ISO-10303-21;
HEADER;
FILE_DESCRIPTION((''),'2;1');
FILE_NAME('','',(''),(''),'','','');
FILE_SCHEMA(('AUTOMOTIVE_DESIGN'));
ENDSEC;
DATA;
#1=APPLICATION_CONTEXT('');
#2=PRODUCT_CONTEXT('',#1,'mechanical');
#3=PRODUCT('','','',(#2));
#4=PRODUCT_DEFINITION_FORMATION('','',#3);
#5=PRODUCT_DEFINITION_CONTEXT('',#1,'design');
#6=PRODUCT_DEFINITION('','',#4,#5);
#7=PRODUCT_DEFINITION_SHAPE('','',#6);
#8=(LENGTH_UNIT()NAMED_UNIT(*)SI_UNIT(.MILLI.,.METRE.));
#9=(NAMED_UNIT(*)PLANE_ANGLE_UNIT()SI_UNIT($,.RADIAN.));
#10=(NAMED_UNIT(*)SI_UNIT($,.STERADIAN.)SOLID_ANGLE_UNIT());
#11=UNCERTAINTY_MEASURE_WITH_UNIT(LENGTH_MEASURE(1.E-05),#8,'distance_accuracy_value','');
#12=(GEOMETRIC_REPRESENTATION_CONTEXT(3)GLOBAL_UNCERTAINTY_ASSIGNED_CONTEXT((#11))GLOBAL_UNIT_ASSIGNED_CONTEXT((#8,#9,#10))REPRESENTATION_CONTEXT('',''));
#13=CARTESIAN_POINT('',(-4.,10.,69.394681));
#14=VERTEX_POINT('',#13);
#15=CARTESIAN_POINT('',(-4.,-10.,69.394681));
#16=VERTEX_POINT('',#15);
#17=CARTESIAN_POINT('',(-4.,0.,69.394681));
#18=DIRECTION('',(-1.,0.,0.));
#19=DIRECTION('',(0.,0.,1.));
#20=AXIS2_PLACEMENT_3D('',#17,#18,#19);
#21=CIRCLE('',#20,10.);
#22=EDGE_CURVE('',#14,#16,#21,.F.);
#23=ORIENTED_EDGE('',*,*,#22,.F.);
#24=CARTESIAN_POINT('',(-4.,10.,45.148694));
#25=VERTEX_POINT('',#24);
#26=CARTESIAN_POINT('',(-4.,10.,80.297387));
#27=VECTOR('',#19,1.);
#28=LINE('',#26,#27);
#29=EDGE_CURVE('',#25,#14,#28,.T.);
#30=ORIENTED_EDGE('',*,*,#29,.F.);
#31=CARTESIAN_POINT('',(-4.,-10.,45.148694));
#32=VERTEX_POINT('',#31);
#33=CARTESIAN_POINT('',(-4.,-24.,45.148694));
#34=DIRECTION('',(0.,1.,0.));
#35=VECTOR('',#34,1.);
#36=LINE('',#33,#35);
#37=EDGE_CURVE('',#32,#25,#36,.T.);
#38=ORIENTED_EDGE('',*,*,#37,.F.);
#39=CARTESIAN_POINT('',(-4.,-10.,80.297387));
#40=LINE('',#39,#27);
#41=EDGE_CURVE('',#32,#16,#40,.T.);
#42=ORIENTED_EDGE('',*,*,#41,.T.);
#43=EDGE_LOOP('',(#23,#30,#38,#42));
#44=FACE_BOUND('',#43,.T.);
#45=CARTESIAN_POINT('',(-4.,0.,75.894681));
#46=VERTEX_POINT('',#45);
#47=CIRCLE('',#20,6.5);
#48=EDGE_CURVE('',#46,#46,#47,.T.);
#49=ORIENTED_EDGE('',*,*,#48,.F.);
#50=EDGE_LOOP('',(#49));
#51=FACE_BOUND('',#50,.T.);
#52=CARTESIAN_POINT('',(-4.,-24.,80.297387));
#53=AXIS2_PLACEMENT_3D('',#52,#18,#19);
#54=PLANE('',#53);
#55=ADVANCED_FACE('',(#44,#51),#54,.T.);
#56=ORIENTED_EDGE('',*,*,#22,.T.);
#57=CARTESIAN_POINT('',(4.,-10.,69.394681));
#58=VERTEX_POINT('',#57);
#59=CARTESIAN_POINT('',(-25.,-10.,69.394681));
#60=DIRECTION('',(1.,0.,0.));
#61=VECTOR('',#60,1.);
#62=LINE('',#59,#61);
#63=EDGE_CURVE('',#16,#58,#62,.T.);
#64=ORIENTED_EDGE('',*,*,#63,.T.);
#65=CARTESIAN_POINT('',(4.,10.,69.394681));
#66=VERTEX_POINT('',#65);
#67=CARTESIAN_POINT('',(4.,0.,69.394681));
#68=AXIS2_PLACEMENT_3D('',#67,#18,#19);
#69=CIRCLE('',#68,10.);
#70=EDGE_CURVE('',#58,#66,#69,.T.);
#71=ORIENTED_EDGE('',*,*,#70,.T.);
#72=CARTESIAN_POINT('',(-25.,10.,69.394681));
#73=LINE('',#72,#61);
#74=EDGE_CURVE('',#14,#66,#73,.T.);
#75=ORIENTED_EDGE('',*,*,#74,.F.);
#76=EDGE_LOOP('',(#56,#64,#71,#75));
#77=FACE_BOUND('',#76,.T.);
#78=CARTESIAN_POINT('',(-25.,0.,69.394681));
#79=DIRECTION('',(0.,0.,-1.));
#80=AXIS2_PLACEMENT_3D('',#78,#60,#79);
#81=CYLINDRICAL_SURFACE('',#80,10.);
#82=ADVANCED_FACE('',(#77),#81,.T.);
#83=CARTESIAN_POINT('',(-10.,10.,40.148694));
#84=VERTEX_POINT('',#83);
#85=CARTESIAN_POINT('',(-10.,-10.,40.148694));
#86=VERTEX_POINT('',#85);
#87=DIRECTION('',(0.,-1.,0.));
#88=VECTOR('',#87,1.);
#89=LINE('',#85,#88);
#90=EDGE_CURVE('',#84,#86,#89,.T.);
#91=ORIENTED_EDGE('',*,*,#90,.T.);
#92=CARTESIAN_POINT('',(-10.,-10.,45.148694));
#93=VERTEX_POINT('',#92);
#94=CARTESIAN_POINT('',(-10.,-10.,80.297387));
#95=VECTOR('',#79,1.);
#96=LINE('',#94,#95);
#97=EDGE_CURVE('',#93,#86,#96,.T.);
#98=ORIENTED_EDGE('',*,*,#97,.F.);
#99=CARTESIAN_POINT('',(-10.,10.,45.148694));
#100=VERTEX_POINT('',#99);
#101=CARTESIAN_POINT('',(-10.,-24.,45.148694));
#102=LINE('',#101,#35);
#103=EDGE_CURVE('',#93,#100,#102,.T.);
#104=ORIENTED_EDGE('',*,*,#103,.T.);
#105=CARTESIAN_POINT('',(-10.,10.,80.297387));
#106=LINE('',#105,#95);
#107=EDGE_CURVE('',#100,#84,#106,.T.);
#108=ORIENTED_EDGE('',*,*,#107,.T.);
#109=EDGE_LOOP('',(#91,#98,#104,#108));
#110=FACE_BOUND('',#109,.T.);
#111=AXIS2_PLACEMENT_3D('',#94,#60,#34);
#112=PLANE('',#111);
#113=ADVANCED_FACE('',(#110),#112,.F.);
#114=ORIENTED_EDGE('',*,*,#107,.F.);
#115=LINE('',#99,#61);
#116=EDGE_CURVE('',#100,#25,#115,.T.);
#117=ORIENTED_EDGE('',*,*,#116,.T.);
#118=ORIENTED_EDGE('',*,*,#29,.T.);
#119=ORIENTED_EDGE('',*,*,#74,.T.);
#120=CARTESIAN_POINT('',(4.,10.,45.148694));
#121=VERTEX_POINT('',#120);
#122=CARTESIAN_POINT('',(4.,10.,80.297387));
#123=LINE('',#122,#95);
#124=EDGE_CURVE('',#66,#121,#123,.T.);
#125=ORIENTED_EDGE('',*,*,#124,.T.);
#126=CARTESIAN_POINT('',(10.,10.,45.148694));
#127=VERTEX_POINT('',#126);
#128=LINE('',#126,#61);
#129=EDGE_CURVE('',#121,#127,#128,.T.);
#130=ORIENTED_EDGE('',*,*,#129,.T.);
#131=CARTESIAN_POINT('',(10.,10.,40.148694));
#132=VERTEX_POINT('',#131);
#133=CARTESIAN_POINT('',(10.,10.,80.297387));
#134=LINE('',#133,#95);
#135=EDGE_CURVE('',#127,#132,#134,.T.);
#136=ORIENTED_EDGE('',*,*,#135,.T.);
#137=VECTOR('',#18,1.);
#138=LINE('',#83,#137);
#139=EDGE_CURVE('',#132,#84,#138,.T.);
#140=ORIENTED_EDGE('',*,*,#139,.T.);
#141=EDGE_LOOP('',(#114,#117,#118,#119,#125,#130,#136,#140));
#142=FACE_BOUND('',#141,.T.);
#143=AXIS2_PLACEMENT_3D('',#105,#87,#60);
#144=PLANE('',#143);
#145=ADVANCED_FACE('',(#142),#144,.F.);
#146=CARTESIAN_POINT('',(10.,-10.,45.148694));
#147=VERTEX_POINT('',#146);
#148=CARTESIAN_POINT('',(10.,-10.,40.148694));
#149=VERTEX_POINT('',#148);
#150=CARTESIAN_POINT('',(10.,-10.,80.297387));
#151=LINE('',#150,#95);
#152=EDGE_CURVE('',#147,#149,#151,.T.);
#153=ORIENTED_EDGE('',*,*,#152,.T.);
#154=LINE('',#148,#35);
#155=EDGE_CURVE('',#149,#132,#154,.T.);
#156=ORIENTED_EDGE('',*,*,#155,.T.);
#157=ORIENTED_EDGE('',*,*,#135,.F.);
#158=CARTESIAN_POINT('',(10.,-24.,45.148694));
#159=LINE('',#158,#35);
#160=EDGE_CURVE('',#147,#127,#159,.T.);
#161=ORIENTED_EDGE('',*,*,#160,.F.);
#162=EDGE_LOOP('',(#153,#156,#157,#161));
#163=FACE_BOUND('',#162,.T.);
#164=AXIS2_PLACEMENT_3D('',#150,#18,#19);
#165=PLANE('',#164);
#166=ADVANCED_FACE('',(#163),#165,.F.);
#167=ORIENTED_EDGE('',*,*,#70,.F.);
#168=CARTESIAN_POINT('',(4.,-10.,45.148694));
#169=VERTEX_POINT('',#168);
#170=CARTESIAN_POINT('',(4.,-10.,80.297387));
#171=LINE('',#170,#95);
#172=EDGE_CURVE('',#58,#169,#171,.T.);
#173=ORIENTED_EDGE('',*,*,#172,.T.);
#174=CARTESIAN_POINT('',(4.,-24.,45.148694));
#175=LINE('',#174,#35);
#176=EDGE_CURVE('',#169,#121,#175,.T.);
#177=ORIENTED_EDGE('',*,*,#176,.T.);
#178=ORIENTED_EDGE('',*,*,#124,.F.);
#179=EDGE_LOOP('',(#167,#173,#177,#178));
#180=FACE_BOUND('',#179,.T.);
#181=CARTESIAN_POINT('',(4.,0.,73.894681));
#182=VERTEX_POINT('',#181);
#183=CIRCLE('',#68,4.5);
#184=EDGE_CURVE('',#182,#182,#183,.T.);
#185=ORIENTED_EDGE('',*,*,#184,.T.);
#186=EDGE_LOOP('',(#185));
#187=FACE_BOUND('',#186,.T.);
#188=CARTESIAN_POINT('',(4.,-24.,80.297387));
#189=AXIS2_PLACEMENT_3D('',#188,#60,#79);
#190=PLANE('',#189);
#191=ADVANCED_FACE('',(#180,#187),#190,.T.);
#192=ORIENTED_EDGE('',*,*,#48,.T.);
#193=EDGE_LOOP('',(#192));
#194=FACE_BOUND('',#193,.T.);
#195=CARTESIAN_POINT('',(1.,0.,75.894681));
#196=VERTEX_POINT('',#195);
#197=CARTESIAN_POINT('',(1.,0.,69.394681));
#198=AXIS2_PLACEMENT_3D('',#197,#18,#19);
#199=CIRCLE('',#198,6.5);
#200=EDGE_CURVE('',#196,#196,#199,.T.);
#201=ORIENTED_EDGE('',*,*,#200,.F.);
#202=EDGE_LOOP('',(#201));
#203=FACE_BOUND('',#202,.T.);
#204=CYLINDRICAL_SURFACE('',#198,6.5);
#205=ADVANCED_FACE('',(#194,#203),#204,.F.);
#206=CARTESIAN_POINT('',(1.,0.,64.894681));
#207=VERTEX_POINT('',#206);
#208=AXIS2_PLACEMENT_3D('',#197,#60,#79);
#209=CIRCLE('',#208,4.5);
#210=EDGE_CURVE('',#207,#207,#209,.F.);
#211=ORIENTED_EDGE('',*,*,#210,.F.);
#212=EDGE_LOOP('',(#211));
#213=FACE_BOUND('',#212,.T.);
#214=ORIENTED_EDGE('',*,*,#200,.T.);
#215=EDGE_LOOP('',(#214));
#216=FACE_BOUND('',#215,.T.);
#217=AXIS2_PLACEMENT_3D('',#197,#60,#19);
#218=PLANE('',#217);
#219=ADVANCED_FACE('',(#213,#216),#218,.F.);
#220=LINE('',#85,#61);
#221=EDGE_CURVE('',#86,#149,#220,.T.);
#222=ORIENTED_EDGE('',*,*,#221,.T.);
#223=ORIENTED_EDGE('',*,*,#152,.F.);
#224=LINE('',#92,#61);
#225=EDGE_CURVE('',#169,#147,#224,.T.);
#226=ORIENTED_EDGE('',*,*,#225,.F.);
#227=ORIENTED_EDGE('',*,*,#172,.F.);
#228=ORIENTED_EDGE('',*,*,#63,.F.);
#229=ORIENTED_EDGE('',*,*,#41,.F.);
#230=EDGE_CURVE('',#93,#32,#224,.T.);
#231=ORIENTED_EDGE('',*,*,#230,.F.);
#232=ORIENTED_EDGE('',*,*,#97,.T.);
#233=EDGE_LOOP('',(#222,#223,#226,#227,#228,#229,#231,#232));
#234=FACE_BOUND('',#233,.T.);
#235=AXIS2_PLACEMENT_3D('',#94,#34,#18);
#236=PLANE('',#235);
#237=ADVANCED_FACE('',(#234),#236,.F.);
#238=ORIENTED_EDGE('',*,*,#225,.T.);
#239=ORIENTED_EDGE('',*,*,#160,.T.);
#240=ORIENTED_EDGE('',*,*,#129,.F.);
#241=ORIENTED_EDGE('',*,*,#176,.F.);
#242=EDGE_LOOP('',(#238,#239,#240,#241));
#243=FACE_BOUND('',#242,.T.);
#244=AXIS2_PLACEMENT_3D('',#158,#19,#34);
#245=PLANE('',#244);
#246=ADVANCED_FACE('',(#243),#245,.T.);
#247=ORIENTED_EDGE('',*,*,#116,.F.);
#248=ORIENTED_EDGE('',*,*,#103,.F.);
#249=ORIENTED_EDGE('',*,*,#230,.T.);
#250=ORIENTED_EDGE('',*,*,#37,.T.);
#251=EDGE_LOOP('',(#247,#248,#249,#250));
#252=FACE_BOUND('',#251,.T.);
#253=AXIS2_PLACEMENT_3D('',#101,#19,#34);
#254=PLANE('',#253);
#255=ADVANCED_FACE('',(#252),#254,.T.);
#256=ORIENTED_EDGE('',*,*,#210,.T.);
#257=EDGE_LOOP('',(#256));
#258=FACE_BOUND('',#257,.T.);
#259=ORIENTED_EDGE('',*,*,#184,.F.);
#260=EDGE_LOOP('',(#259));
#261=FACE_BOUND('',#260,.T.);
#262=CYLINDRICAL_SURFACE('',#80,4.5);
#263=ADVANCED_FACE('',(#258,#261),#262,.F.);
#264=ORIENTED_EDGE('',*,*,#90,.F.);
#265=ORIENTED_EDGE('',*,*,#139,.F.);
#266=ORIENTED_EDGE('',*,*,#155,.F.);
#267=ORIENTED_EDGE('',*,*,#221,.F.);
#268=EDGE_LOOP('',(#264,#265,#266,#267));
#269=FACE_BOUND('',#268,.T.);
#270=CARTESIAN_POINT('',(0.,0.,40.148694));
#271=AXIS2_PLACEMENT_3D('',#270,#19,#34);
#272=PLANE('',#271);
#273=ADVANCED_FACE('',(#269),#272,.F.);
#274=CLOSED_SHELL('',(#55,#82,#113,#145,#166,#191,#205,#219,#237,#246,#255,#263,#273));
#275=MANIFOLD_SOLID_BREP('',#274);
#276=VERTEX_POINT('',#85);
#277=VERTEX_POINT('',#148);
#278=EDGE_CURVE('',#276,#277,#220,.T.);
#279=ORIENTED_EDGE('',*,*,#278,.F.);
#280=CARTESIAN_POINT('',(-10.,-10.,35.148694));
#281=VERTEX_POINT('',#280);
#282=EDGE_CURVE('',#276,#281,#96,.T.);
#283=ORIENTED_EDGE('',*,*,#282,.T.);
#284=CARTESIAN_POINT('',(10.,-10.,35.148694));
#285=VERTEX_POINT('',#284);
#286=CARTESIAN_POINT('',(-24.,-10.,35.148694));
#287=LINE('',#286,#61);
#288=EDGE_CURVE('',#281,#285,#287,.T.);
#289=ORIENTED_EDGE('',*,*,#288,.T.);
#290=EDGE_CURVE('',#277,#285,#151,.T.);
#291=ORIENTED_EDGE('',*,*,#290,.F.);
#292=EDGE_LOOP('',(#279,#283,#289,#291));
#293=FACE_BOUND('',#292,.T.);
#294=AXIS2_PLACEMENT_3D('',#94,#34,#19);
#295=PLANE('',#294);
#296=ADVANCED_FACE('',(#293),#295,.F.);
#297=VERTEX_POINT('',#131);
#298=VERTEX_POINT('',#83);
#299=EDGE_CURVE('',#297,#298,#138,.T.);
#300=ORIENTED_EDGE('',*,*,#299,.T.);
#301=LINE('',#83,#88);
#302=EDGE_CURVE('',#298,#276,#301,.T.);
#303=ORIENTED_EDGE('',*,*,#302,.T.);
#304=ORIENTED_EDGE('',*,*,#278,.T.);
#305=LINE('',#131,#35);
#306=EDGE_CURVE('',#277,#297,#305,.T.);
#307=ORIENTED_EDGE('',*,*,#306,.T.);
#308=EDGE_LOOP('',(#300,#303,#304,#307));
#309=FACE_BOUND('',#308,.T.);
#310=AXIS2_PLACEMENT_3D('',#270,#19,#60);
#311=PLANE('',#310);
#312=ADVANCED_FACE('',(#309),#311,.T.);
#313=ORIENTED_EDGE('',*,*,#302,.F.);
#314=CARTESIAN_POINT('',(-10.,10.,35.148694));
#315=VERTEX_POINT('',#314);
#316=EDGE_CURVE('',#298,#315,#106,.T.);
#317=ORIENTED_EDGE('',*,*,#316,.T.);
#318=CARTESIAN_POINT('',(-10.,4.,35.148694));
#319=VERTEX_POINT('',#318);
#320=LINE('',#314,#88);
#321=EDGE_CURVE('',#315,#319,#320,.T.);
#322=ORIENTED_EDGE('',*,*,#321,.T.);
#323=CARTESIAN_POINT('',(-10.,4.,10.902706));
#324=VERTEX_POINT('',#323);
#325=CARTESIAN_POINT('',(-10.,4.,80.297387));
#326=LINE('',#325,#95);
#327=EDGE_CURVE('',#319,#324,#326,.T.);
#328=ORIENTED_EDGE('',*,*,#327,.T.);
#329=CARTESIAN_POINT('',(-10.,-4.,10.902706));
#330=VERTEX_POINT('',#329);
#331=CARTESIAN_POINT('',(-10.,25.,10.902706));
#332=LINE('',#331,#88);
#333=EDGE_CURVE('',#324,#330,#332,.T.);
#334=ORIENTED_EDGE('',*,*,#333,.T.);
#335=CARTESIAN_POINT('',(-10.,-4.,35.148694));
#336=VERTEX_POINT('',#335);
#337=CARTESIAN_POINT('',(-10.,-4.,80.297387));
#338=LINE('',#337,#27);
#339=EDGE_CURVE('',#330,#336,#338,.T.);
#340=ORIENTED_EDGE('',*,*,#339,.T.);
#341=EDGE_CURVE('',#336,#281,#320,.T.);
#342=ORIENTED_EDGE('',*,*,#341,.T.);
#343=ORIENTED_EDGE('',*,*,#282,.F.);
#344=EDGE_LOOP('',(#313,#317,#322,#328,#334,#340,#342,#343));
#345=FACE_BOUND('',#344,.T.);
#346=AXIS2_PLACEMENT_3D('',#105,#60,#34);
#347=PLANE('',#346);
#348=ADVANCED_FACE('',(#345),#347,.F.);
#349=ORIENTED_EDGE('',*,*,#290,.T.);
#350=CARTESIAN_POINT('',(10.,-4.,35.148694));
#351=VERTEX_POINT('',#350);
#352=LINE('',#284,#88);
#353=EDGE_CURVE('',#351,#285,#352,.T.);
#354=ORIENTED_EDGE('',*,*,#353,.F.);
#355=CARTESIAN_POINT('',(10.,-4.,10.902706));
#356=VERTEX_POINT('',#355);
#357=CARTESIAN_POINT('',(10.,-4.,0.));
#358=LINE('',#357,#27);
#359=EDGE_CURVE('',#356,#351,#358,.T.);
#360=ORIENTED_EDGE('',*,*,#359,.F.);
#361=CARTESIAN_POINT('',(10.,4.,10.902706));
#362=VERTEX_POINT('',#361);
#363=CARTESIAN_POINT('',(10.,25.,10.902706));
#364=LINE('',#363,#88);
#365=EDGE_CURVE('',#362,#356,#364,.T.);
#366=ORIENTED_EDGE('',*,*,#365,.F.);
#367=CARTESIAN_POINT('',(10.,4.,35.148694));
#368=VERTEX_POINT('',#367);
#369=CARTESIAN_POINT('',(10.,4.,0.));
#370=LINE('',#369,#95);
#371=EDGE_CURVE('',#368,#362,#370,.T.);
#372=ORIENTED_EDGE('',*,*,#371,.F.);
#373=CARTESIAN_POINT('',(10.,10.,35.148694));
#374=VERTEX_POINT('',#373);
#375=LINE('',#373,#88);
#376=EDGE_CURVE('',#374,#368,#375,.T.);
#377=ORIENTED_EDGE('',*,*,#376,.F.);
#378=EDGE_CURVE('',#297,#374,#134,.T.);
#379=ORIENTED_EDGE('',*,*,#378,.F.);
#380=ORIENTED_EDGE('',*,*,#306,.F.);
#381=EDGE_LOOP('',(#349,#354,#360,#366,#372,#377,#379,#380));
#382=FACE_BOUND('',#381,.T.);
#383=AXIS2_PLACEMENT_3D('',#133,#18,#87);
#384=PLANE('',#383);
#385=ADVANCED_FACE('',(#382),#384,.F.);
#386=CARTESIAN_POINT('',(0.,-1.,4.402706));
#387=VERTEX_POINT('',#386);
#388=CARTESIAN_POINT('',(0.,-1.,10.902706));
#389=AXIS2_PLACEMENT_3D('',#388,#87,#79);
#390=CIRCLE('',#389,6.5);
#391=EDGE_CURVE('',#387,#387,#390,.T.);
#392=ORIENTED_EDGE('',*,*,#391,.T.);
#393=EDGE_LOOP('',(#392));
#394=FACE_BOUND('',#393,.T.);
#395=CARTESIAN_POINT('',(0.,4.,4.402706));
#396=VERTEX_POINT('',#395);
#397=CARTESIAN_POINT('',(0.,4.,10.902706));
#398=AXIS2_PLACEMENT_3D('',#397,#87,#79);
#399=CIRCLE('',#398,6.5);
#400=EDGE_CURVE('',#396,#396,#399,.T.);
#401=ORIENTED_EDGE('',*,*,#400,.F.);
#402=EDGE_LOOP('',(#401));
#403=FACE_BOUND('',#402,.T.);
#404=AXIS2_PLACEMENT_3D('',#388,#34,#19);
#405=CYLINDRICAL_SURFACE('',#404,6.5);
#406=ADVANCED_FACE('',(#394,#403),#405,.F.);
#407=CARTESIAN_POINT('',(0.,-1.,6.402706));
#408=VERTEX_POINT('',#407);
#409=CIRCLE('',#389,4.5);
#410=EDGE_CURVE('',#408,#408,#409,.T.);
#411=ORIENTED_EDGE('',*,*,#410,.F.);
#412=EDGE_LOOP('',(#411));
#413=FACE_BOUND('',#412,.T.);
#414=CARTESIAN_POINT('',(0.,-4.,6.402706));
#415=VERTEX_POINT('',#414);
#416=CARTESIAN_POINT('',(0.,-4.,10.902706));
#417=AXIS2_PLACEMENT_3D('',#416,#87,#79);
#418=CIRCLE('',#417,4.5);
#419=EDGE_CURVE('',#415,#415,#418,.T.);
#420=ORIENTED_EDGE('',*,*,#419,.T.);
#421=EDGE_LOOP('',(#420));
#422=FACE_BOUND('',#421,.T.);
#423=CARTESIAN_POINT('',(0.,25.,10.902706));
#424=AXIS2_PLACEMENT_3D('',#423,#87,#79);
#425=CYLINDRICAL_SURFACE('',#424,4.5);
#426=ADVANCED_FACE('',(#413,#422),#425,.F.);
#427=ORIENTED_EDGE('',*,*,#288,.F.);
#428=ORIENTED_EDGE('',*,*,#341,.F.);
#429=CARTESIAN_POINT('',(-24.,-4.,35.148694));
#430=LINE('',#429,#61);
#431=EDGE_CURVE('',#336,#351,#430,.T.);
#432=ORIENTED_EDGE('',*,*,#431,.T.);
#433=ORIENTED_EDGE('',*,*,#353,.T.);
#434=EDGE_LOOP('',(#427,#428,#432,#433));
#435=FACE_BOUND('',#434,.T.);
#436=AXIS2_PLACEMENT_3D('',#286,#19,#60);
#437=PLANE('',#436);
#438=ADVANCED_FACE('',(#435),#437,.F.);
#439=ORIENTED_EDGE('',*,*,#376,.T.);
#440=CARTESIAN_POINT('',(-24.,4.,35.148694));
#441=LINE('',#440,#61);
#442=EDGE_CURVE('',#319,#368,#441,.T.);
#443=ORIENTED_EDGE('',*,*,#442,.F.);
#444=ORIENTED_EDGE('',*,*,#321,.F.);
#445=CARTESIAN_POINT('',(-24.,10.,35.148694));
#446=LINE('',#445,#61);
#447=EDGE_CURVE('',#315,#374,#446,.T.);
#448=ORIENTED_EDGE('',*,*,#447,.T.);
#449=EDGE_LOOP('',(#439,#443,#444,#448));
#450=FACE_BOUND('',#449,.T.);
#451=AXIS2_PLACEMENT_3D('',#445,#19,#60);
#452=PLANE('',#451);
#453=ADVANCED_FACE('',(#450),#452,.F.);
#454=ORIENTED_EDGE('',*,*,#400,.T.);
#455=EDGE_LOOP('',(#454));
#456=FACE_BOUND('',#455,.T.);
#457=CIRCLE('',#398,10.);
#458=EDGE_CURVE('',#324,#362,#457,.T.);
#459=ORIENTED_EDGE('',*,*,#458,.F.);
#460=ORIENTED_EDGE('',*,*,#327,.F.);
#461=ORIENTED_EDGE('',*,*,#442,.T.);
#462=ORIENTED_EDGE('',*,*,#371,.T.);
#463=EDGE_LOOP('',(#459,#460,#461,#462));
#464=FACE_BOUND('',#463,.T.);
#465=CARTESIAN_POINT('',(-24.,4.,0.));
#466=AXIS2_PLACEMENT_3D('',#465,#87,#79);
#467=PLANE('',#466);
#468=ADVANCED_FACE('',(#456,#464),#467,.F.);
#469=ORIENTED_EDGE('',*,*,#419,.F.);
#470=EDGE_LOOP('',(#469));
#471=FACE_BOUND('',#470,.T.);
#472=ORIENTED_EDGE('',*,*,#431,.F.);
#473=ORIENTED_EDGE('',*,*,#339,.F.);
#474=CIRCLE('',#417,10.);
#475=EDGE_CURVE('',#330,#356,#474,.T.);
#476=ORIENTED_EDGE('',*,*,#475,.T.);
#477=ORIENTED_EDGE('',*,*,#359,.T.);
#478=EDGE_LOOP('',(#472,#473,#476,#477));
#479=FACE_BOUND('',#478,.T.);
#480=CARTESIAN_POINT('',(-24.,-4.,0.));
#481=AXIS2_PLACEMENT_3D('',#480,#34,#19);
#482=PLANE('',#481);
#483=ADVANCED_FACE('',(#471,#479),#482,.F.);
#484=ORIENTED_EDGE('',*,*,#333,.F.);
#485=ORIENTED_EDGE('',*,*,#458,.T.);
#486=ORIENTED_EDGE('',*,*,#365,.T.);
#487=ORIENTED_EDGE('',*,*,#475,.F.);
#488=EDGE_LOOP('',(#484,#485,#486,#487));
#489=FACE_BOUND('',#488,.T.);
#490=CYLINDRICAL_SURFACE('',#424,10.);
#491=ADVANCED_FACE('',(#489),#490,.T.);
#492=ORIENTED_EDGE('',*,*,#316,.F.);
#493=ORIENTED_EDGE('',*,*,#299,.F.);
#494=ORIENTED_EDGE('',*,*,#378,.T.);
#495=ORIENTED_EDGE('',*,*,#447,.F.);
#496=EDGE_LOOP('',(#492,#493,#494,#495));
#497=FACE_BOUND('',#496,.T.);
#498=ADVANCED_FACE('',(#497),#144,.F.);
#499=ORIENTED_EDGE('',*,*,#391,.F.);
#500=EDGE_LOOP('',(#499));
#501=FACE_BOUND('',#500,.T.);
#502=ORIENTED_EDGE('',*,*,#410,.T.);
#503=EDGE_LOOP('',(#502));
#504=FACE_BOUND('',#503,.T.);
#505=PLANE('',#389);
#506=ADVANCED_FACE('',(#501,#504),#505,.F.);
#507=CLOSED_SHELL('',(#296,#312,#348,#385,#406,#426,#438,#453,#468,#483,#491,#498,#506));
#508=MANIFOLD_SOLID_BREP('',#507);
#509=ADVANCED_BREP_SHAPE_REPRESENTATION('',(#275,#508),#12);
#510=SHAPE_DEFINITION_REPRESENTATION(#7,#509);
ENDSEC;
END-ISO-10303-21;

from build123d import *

# Parameters (mm, degrees)
SKETCH_1_W          = 20
SKETCH_1_H          = 20
EXTRUDE_1_DEPTH     = 80.297387422
SKETCH_7_W          = 35.148693711
SKETCH_7_H          = 6
CUT_EXTRUDE_6_DEPTH = 34
SKETCH_2_R          = 6.5
CUT_EXTRUDE_9_DEPTH = 5
SKETCH_3_R          = 4.5
CUT_EXTRUDE_2_DEPTH = 29
MOVE_BODY_1_ANGLE   = 90


# Read off the part's stored shape, not the designer's step: 교차3
with BuildPart() as part:
    # 스케치1 → 보스-돌출1 (new body)
    with BuildSketch(Plane.XY):
        Rectangle(SKETCH_1_W, SKETCH_1_H)
    extrude(amount=EXTRUDE_1_DEPTH)

    # 스케치7 → 컷-돌출6 (cut)
    with BuildSketch(Plane(origin=(10, 0, 0), x_dir=(0, 0, -1), z_dir=(1, 0, 0))):
        with Locations((-17.574346855, 7)):
            Rectangle(SKETCH_7_W, SKETCH_7_H)
        with Locations((-17.574346855, -7)):
            Rectangle(SKETCH_7_W, SKETCH_7_H)
    cut_extrude_6 = extrude(amount=-CUT_EXTRUDE_6_DEPTH, mode=Mode.SUBTRACT)

    # 스케치2 → 컷-돌출9 (cut)
    with BuildSketch(Plane(origin=(0, 4, 0), x_dir=(-1, 0, 0), z_dir=(0, -1, 0))):
        with Locations(Location((0, -10.902706153, 0), (0, 0, 90))):
            Circle(SKETCH_2_R)
    cut_extrude_9 = extrude(amount=CUT_EXTRUDE_9_DEPTH, mode=Mode.SUBTRACT)

    # 스케치3 → 컷-돌출2 (cut)
    with BuildSketch(Plane(origin=(0, -4, 0), x_dir=(-1, 0, 0), z_dir=(0, -1, 0))):
        with Locations(Location((0, -10.902706153, 0), (0, 0, 90))):
            Circle(SKETCH_3_R)
        with BuildLine():
            Line((-21.262122506, -10.902706153), (-10, -10.902706153))
            ThreePointArc((-10, -10.902706153), (0, -0.902706153), (10, -10.902706153))
            Line((10, -10.902706153), (21.262122506, -10.902706153))
            ThreePointArc((21.262122506, -10.902706153), (0, 10.359416353), (-21.262122506, -10.902706153))
        make_face()
    cut_extrude_2 = extrude(amount=-CUT_EXTRUDE_2_DEPTH, mode=Mode.SUBTRACT)

    # 대칭 복사6: 컷-돌출6, 컷-돌출9, 컷-돌출2 across plane
    add(cut_extrude_6.mirror(Plane.XY.offset(40.148693711)), mode=Mode.SUBTRACT)
    add(cut_extrude_9.mirror(Plane.XY.offset(40.148693711)), mode=Mode.SUBTRACT)
    add(cut_extrude_2.mirror(Plane.XY.offset(40.148693711)), mode=Mode.SUBTRACT)


with BuildPart() as body_2:
    # 교차3: the piece on the far side of the plane
    add(part.part)
    split(bisect_by=Plane.XY.offset(40.148693711), keep=Keep.BOTTOM)


with BuildPart() as part_1:
    add(part.part)

    # 교차3
    split(bisect_by=Plane.XY.offset(40.148693711), keep=Keep.TOP)


with BuildPart() as part_2:
    # Move Body 1: moved
    add(part_1.part.rotate(Axis((0, 0, 0), (0, 0, 1)), MOVE_BODY_1_ANGLE))


solid = Compound([body_2.part, part_2.part])
